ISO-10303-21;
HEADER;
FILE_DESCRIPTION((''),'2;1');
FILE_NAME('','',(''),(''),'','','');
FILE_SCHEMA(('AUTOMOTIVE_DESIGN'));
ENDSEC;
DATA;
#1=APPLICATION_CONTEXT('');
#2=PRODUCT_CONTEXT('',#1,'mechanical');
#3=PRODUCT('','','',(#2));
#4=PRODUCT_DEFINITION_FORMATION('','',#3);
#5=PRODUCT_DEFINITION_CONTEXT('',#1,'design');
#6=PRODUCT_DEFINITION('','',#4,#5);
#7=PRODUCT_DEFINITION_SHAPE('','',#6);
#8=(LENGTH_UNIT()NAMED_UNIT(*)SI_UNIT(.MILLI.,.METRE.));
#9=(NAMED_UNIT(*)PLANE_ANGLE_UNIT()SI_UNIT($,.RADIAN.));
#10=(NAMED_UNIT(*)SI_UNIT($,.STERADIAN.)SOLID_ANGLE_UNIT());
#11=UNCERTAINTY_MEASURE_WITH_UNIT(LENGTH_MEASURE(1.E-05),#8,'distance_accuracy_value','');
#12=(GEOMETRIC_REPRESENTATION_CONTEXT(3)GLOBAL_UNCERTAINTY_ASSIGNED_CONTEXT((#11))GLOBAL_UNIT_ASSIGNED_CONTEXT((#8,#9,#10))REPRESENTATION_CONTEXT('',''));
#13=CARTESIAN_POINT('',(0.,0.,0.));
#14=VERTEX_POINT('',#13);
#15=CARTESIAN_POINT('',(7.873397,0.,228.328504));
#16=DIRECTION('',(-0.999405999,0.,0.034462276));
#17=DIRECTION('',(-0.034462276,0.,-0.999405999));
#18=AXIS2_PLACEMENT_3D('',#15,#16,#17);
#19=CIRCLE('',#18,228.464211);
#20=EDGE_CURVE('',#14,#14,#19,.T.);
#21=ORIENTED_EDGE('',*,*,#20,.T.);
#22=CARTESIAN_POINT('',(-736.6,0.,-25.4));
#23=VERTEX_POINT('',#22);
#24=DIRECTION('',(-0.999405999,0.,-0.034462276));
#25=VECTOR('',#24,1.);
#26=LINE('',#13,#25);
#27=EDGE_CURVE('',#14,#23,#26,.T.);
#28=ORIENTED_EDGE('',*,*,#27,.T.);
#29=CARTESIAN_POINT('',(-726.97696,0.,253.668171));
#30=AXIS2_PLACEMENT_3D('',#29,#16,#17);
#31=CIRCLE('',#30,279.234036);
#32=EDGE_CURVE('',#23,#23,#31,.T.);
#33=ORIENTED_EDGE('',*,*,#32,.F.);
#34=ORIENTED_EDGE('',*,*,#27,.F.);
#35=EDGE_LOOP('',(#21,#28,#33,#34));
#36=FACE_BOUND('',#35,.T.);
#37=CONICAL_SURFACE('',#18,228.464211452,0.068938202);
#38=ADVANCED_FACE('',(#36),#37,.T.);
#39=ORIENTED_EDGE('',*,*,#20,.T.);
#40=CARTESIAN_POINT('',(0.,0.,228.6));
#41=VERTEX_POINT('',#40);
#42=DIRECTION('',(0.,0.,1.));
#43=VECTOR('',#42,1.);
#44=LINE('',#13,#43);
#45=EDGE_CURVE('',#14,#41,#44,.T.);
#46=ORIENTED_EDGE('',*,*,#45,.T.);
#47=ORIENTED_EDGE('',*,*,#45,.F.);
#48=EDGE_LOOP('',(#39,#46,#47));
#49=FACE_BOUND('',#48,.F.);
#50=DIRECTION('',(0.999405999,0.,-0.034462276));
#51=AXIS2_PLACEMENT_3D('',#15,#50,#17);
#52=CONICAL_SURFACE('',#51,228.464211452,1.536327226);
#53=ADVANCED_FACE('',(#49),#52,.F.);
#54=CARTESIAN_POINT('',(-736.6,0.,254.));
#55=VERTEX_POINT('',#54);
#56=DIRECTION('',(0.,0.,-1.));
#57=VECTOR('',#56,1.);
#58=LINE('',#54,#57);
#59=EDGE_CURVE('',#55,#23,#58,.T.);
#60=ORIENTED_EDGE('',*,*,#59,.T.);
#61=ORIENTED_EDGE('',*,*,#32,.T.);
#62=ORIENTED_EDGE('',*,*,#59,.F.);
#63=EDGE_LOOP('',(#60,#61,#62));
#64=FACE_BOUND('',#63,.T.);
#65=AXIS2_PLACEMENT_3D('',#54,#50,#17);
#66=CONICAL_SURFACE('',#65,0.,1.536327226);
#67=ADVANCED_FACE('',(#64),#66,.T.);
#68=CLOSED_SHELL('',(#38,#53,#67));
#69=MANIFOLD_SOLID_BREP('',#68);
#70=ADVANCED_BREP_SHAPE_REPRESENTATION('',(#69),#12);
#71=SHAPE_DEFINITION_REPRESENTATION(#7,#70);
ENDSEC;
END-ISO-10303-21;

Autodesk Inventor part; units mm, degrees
ref_plane "YZ Plane" through (0, 0, 0) normal (1, 0, 0) x (0, 1, 0)
ref_plane "XZ Plane" through (0, 0, 0) normal (0, 1, 0) x (-1, 0, 0)
ref_plane "XY Plane" through (0, 0, 0) normal (0, 0, 1) x (1, 0, 0)
sketch "Sketch1" plane through (0, 0, 0) normal (0, 1, 0) x (-1, 0, 0)
  line L0 (0, 0) -> (0, 228.6)
  line L1 (736.6, 254) -> (736.6, -25.4)
  line L2 (0, 228.6) -> (736.6, 254)
  line L3 (0, 0) -> (736.6, -25.4)
  dimension "d0" = 228.6
  dimension "d1" = 279.4
  dimension "d2" = 736.6
revolve "Revolution1" add sketch "Sketch1" angle 360 about axis through (0, 0, 228.6) along (-0.999406, 0, 0.0344623)
properties part number "Container"
